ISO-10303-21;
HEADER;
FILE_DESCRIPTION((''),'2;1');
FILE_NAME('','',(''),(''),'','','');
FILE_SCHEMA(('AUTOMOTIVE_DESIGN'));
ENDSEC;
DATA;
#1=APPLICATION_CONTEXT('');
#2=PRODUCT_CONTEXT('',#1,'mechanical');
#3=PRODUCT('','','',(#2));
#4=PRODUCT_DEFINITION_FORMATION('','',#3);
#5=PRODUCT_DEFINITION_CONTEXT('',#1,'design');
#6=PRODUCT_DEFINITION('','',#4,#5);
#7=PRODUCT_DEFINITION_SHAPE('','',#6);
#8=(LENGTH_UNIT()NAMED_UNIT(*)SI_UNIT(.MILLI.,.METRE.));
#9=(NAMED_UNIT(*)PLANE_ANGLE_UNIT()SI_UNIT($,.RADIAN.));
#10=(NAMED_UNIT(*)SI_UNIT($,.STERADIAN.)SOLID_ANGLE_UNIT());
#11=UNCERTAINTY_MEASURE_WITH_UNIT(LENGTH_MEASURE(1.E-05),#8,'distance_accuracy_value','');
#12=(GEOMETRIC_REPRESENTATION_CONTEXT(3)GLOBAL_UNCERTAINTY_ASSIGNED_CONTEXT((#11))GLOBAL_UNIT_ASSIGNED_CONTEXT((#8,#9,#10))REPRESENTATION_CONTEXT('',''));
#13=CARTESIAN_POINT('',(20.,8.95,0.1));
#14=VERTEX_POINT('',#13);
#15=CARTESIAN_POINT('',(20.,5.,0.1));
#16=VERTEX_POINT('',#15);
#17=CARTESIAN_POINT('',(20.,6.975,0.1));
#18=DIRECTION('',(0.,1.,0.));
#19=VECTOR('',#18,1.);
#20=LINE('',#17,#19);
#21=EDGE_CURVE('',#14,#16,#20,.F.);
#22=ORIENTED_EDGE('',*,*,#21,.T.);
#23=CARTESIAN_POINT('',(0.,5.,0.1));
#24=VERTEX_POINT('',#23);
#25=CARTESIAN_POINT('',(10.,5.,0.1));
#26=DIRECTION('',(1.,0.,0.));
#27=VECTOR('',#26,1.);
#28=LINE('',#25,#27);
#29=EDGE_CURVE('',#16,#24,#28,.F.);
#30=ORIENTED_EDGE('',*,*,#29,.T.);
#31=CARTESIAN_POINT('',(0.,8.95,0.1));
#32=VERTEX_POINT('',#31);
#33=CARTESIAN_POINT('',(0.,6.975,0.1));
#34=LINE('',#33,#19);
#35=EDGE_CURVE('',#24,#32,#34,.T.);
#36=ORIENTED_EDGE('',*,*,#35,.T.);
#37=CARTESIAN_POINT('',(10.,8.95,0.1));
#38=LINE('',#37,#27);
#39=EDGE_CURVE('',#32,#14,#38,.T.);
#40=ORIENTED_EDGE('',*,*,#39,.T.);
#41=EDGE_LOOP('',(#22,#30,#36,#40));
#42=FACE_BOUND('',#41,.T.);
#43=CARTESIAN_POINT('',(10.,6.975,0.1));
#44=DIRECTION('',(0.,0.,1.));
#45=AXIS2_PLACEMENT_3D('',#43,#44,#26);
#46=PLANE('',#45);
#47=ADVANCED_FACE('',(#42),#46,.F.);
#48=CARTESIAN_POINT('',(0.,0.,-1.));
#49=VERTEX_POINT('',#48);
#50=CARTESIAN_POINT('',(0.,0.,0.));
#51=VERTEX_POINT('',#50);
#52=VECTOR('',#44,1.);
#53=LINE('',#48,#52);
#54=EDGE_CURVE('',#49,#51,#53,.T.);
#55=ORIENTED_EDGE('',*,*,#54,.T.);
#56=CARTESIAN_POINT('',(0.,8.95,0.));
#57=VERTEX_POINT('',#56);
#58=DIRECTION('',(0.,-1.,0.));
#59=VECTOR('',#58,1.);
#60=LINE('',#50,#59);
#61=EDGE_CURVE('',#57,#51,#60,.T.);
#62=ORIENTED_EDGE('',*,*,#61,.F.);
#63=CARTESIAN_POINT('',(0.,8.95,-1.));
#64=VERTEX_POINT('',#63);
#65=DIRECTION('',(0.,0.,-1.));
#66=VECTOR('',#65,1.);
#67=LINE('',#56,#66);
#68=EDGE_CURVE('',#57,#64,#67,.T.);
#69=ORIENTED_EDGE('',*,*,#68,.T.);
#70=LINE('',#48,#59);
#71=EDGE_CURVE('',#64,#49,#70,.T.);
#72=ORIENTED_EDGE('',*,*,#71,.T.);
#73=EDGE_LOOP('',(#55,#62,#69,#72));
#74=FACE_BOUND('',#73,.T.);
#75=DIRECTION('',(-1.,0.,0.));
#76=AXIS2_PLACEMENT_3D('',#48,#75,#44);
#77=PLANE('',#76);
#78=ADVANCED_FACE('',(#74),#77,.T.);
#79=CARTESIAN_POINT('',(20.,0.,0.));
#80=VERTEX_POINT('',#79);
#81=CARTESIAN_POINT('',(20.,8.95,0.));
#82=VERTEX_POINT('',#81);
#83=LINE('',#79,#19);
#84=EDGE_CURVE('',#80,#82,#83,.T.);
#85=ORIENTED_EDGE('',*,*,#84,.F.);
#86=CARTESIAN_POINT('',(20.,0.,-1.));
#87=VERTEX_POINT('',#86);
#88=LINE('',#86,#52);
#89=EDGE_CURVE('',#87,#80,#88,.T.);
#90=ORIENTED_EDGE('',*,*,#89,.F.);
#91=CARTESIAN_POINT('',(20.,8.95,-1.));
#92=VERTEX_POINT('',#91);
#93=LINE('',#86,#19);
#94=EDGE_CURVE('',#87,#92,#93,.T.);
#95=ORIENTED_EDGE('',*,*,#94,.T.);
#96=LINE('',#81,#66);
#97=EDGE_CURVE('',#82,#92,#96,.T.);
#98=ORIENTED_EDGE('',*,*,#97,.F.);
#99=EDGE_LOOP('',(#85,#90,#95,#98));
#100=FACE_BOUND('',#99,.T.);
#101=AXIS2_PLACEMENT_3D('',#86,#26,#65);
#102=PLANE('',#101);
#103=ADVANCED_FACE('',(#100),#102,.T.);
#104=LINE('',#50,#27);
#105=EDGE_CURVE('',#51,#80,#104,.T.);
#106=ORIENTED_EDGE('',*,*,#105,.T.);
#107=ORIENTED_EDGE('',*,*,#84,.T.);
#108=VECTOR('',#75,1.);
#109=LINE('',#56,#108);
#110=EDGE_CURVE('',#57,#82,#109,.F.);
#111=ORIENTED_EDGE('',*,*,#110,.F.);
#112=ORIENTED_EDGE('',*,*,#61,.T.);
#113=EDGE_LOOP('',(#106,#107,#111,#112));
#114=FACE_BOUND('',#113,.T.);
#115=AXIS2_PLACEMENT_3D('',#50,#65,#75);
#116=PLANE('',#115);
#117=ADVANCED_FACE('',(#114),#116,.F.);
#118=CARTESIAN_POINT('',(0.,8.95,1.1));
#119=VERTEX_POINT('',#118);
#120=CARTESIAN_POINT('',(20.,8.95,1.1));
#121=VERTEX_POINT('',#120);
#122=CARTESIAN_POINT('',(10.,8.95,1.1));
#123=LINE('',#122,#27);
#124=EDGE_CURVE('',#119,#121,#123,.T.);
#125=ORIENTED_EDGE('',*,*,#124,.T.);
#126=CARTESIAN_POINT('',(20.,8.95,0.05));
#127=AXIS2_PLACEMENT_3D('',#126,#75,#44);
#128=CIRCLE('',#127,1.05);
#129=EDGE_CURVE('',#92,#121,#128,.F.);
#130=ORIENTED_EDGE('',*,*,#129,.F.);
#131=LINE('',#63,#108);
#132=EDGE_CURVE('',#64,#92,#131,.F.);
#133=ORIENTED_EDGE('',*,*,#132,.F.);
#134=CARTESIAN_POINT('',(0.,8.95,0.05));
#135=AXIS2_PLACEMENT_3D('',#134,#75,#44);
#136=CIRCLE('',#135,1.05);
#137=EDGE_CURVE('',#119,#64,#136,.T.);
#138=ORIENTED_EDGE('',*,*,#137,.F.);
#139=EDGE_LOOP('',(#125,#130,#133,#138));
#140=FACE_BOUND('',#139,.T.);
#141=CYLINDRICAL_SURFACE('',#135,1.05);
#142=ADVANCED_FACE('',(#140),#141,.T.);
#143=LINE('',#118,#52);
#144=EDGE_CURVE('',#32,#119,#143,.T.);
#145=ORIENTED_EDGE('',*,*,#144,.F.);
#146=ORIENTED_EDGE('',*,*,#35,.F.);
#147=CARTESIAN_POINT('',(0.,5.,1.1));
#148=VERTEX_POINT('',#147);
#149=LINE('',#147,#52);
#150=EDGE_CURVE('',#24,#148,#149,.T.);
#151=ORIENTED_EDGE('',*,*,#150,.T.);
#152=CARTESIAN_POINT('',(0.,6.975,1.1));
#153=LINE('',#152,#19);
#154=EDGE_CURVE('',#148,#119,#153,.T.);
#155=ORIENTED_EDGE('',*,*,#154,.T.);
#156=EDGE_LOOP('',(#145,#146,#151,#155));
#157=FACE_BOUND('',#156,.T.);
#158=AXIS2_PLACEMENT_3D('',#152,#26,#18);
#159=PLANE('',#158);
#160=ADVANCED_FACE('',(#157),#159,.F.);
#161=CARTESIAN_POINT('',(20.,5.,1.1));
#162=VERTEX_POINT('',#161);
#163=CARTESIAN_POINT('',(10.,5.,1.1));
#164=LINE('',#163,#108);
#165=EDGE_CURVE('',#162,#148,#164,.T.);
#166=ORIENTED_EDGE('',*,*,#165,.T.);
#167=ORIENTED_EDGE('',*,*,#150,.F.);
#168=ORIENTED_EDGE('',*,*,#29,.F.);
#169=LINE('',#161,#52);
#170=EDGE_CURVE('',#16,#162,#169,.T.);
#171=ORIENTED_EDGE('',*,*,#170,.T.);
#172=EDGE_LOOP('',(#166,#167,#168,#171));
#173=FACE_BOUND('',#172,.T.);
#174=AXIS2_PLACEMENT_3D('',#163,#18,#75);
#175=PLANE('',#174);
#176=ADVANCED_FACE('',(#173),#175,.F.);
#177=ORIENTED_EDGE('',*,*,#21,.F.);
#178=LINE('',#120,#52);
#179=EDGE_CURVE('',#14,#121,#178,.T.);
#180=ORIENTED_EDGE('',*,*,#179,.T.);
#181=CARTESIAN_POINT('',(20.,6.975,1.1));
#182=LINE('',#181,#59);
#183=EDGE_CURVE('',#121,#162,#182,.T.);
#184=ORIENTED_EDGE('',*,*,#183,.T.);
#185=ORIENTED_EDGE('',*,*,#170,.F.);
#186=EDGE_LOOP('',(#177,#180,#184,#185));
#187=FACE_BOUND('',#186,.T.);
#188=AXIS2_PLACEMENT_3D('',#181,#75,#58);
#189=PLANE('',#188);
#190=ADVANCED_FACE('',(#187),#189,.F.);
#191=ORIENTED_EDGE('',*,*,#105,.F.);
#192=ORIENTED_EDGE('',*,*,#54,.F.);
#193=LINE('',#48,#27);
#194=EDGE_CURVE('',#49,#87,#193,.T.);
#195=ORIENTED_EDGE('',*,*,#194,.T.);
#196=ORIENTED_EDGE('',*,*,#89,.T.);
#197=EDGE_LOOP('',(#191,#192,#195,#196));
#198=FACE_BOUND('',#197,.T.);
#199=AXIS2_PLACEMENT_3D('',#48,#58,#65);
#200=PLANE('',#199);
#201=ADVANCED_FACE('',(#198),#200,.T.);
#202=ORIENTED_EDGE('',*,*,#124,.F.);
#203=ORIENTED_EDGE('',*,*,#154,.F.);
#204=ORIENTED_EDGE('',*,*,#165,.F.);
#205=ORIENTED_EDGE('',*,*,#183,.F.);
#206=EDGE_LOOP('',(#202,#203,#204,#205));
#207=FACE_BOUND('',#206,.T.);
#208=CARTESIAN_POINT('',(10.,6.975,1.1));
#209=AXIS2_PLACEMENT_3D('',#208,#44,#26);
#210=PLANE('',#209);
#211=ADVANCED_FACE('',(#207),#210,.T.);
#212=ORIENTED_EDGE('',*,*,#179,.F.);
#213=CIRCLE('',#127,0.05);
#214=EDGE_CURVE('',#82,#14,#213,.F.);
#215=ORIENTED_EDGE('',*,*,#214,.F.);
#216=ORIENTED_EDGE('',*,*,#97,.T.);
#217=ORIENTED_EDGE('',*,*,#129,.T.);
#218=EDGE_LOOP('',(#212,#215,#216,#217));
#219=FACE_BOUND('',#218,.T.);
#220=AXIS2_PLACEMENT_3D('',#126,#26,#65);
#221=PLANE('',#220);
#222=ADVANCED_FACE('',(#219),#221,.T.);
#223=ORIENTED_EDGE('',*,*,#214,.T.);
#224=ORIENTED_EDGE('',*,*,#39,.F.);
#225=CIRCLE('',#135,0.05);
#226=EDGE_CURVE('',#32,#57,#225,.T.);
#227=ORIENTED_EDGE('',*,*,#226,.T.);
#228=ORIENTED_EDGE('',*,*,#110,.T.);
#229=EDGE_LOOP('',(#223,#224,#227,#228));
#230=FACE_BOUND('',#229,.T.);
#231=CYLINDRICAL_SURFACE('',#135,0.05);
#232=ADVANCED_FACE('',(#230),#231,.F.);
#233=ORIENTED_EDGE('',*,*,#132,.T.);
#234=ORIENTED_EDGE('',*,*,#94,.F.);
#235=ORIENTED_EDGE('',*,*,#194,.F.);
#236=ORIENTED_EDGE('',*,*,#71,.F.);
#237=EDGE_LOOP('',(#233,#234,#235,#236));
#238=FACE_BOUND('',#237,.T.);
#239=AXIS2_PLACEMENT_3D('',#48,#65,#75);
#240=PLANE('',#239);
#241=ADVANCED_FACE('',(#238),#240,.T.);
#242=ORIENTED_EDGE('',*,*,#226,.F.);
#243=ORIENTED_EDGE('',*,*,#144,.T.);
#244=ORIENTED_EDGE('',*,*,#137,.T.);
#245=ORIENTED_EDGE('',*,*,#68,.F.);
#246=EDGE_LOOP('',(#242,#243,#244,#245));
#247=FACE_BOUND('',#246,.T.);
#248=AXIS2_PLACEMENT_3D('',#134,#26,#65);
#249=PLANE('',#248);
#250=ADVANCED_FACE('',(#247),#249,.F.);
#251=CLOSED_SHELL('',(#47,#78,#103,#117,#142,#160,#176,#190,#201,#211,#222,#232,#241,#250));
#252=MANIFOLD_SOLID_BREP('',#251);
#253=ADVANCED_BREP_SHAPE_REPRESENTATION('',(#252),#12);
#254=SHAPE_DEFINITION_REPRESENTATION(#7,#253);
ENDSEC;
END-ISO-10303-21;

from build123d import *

# Parameters (mm, degrees)
SKETCH_1_W         = 20
SKETCH_1_H         = 10
BASEPLATE_DEPTH    = 1
HEM_CLOSED_DEPTH   = 20
HEM_CLOSED_2_DEPTH = 20


# Read off the part's stored shape, not the designer's step: Hem_closed
# Sheet-metal steps are written as plain solids
with BuildPart() as part:
    # Sketch 1 → BasePlate (new body)
    with BuildSketch(Plane.XY):
        with Locations((10, 5)):
            Rectangle(SKETCH_1_W, SKETCH_1_H)
    extrude(amount=-BASEPLATE_DEPTH)

    # Hem_closed outline → Hem_closed (cut)
    with BuildSketch(Plane.YZ):
        with BuildLine():
            Line((10, 0), (9.998808848, 0))
            ThreePointArc((9.998808848, 0), (9.674568837, -0.709934208), (8.95, -1))
            Line((8.95, -1), (10, -1))
            Line((10, -1), (10, 0))
        make_face()
    extrude(amount=HEM_CLOSED_DEPTH, mode=Mode.SUBTRACT)

    # Hem_closed 2 outline → Hem_closed 2 (add)
    with BuildSketch(Plane.YZ):
        with BuildLine():
            Line((5, 1.1), (5, 0.1))
            Line((5, 0.1), (8.95, 0.1))
            ThreePointArc((8.95, 0.1), (9, 0.05), (8.95, 0))
            Line((8.95, 0), (9.998808848, 0))
            ThreePointArc((9.998808848, 0), (9.709934208, 0.774568837), (8.95, 1.1))
            Line((8.95, 1.1), (5, 1.1))
        make_face()
    extrude(amount=HEM_CLOSED_2_DEPTH)


solid = part.part
